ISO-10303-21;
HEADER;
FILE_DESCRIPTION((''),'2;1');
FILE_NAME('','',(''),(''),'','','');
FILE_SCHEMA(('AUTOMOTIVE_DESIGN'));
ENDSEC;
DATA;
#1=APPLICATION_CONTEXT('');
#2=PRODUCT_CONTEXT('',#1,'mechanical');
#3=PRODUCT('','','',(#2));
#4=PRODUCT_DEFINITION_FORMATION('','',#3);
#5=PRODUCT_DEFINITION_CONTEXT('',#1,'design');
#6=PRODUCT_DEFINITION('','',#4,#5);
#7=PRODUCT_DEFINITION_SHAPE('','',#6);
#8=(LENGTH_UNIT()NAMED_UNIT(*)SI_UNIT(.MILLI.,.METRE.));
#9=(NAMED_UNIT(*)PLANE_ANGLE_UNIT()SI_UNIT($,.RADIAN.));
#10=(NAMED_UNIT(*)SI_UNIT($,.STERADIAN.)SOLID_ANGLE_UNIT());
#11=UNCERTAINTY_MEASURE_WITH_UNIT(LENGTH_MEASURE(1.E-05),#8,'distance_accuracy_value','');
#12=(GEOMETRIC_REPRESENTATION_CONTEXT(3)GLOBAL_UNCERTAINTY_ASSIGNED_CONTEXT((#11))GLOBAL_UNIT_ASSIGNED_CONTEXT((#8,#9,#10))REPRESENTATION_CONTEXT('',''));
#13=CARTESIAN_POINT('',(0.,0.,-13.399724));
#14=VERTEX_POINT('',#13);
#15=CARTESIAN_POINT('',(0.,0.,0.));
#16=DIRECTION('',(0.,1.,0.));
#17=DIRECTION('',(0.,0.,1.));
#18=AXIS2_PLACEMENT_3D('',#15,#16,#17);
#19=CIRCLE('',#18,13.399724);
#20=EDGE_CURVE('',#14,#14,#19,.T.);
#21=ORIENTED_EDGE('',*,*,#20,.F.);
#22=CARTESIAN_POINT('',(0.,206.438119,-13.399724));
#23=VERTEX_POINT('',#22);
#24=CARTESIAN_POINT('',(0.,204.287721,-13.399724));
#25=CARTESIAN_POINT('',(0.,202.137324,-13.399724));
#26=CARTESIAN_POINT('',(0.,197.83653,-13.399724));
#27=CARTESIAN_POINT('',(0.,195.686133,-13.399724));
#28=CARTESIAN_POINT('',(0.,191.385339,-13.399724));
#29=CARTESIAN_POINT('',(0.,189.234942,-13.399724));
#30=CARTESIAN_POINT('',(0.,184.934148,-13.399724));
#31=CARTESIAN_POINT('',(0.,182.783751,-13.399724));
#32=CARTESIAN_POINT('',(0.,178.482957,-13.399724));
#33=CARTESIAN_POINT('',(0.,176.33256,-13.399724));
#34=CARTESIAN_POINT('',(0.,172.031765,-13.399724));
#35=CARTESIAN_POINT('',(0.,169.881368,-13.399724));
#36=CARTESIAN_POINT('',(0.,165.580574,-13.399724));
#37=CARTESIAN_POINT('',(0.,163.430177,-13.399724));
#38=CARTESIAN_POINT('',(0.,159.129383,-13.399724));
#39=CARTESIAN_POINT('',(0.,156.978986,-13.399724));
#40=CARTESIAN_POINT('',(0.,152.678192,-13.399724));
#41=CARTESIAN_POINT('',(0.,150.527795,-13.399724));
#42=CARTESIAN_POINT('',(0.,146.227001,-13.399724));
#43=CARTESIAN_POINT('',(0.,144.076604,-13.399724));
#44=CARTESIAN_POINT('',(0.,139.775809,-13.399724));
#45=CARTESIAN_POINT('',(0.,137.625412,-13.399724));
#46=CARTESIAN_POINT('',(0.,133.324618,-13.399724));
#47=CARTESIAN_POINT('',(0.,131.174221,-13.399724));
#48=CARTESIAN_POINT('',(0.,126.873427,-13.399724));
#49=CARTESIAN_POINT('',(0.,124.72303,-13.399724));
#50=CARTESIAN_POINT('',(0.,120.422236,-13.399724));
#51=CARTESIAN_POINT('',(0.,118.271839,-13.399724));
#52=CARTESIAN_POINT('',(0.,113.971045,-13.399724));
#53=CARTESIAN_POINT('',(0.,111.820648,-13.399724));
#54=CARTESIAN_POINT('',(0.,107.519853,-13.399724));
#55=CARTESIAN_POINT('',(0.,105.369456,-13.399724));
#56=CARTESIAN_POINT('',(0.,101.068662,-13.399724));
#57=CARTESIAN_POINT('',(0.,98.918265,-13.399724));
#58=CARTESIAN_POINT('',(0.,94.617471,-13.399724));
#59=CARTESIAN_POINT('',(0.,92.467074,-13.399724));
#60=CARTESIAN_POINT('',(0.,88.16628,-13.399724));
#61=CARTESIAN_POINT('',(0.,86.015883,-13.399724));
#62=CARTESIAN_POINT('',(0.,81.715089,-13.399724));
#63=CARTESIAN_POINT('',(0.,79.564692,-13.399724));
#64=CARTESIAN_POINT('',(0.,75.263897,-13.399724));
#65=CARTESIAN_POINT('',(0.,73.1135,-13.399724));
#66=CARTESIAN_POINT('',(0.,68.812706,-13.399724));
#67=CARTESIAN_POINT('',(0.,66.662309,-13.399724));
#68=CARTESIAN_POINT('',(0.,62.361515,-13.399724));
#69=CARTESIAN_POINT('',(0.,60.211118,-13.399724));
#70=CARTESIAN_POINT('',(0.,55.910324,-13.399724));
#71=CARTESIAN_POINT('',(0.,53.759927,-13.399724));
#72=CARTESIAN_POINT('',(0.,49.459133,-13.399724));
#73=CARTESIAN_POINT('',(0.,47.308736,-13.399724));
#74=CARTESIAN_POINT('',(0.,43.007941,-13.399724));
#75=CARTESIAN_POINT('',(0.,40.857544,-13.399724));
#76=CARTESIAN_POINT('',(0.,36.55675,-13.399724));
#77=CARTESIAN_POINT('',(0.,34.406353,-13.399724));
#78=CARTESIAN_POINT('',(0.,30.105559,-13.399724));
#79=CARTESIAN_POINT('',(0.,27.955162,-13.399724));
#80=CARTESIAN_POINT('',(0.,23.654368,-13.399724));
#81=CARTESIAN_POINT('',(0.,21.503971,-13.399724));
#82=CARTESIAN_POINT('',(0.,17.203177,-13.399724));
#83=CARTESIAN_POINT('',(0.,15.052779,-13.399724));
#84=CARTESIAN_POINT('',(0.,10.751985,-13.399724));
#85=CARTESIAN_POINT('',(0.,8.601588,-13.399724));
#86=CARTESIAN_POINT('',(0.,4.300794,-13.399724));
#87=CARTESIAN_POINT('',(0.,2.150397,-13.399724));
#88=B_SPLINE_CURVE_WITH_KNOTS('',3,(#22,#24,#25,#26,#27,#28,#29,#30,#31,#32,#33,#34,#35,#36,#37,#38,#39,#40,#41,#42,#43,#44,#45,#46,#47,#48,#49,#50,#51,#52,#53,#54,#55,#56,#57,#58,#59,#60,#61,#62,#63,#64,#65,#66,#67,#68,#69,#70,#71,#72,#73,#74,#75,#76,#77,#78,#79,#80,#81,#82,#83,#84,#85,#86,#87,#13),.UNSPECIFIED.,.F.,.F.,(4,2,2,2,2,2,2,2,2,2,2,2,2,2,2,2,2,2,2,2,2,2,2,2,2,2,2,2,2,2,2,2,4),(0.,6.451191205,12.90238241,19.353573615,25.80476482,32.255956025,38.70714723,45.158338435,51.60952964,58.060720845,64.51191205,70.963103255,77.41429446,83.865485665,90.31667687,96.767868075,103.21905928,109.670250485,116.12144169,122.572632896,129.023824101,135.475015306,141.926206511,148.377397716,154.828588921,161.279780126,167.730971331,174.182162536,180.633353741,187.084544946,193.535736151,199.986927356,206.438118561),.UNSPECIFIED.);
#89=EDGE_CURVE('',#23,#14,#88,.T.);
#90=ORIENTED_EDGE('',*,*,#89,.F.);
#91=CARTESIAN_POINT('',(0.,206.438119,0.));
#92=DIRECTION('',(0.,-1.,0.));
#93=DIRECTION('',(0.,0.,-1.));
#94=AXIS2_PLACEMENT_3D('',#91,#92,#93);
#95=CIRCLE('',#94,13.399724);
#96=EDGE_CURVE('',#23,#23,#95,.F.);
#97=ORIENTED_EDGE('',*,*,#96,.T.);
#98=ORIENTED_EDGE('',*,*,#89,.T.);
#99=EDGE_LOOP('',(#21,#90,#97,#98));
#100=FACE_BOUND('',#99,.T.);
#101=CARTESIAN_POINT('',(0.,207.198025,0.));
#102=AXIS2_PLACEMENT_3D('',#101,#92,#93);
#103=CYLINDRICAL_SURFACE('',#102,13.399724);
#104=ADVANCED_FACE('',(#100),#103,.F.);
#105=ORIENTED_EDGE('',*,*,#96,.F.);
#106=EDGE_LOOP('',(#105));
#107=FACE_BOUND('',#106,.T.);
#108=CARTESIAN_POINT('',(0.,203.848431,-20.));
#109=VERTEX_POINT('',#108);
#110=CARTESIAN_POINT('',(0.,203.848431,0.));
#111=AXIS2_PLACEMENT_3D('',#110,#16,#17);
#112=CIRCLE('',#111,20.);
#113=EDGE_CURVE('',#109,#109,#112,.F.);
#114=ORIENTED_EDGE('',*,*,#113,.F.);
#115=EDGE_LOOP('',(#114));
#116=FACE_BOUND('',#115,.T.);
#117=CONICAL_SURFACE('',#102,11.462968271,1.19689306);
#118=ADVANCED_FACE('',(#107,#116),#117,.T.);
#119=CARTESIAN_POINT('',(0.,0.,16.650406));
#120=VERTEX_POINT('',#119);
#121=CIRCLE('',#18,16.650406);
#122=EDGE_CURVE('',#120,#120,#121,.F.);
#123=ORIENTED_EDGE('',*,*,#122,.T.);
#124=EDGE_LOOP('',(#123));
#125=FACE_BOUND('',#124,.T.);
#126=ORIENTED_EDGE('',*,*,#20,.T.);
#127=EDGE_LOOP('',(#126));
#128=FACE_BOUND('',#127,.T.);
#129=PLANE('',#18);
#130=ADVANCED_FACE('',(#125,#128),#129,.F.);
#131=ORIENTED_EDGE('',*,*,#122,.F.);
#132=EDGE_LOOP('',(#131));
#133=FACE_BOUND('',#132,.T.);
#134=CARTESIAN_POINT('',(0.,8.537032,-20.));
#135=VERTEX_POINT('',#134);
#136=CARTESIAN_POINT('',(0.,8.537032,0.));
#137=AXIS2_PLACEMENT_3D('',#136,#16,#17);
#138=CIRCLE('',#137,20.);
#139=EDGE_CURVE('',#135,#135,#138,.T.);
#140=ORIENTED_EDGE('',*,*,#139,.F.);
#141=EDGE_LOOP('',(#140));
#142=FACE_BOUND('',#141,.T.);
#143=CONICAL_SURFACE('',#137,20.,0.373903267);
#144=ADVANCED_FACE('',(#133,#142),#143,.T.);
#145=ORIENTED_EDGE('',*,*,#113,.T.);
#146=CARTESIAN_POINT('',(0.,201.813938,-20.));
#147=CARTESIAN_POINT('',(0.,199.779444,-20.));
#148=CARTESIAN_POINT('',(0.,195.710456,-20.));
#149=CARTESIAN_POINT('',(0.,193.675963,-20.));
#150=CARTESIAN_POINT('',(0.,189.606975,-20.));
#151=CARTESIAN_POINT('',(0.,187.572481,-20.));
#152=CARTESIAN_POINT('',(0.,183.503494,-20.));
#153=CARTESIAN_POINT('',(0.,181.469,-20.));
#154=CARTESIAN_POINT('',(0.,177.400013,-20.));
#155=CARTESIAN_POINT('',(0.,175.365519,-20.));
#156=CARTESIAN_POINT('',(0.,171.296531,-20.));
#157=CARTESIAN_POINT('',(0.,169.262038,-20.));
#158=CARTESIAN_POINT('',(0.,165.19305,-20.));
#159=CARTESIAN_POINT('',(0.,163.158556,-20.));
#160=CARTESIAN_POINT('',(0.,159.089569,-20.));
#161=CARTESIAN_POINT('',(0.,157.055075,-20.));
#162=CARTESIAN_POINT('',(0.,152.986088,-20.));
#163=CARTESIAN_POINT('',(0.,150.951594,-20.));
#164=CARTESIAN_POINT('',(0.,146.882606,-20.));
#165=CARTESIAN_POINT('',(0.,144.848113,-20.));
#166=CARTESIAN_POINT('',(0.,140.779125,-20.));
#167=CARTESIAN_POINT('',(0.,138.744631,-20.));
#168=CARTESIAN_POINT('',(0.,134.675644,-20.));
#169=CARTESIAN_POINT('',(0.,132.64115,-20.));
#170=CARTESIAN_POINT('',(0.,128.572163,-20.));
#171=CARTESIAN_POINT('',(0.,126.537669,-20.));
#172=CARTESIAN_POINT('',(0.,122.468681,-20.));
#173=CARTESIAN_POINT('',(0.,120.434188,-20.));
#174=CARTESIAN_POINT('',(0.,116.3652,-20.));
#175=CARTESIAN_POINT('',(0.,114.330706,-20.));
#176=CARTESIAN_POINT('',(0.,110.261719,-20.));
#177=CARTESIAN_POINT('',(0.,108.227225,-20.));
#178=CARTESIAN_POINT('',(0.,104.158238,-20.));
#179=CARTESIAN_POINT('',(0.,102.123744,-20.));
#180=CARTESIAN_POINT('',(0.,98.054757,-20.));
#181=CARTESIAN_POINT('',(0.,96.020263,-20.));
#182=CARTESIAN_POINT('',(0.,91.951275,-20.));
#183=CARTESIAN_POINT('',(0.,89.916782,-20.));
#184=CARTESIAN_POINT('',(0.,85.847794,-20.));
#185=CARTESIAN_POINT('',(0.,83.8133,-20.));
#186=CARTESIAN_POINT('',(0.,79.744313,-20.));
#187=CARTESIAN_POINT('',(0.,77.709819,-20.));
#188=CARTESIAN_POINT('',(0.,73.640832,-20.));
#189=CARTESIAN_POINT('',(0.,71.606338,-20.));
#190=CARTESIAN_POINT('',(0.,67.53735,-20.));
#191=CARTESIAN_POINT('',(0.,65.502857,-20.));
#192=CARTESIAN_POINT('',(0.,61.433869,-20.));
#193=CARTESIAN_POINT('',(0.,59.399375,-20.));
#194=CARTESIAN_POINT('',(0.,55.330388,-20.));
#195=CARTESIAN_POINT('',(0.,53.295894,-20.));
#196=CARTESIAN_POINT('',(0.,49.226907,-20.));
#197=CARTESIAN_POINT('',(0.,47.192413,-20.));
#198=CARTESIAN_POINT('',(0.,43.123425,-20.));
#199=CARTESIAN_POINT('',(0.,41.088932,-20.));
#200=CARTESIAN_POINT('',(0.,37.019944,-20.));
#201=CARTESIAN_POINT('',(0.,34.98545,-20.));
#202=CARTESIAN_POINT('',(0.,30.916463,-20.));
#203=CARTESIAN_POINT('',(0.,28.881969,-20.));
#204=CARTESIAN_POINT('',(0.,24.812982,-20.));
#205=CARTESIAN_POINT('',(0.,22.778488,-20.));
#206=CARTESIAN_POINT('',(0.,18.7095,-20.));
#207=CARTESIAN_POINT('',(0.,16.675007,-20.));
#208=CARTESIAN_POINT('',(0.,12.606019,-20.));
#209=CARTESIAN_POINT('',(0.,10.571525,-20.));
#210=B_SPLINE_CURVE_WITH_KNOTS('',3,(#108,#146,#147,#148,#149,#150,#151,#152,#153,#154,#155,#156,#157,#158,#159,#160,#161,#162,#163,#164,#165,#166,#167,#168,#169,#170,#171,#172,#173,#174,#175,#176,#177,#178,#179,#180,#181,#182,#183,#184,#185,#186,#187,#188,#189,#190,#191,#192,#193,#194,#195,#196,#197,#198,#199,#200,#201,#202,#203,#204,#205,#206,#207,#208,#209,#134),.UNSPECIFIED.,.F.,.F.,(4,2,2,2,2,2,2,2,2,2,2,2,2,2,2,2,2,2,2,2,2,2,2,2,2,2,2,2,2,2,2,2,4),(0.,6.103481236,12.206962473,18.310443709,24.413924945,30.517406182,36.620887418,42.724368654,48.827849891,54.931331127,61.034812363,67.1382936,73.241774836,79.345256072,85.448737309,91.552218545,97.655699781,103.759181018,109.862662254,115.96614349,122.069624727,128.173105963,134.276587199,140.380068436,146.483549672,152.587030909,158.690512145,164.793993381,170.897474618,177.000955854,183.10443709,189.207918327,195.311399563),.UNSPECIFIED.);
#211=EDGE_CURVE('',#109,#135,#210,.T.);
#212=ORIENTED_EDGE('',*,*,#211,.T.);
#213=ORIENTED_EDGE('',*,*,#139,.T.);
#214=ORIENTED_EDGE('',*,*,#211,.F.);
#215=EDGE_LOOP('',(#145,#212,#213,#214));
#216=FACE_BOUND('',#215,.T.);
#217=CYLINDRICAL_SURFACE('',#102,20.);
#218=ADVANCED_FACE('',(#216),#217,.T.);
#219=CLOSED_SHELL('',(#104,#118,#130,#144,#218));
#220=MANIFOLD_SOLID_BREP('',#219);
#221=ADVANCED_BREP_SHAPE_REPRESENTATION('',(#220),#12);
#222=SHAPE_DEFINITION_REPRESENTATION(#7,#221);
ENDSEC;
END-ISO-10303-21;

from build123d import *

# Parameters (mm, degrees)
SKETCH1_R           = 20
BOSS_EXTRUDE1_DEPTH = 207.198025
SKETCH2_R           = 13.399724126
CUT_EXTRUDE1_DEPTH  = 210.119634573
CHAMFER1_SIZE       = 3.349594
CHAMFER1_SIZE_2     = 8.537032


with BuildPart() as part:
    # Sketch1 → Boss-Extrude1 (new body)
    with BuildSketch(Plane(origin=(0, 0, 0), x_dir=(1, 0, 0), z_dir=(0, 1, 0))):
        with Locations(Location((0, 0, 0), (0, 0, 90))):
            Circle(SKETCH1_R)
    extrude(amount=BOSS_EXTRUDE1_DEPTH)

    # Sketch2 → Cut-Extrude1 (cut, through all)
    with BuildSketch(Plane(origin=(0, 0, 0), x_dir=(1, 0, 0), z_dir=(0, 1, 0))):
        with Locations(Location((0, 0, 0), (0, 0, 90))):
            Circle(SKETCH2_R)
    extrude(amount=CUT_EXTRUDE1_DEPTH, mode=Mode.SUBTRACT)

    # Chamfer1
    # the kernel refuses this chamfer: 8.537032, 3.349594 mm, written as the material it takes off along each edge
    with BuildSketch(Plane(origin=(0, 207.198025, 0), x_dir=(0, 0, -1), z_dir=(1, 0, 0))) as chamfer1_piece_1:
        Polygon((20, -CHAMFER1_SIZE), (20 - CHAMFER1_SIZE_2, 0), (20, 0), align=None)
    revolve(axis=Axis((0, 207.198025, 0), (0, 1, 0)), mode=Mode.SUBTRACT)
    with BuildSketch(Plane(origin=(0, 0, 0), x_dir=(0, 0, -1), z_dir=(1, 0, 0))) as chamfer1_piece_2:
        Polygon((20, CHAMFER1_SIZE_2), (20 - CHAMFER1_SIZE, 0), (20, 0), align=None)
    revolve(axis=Axis((0, 0, 0), (0, 1, 0)), mode=Mode.SUBTRACT)


solid = part.part
